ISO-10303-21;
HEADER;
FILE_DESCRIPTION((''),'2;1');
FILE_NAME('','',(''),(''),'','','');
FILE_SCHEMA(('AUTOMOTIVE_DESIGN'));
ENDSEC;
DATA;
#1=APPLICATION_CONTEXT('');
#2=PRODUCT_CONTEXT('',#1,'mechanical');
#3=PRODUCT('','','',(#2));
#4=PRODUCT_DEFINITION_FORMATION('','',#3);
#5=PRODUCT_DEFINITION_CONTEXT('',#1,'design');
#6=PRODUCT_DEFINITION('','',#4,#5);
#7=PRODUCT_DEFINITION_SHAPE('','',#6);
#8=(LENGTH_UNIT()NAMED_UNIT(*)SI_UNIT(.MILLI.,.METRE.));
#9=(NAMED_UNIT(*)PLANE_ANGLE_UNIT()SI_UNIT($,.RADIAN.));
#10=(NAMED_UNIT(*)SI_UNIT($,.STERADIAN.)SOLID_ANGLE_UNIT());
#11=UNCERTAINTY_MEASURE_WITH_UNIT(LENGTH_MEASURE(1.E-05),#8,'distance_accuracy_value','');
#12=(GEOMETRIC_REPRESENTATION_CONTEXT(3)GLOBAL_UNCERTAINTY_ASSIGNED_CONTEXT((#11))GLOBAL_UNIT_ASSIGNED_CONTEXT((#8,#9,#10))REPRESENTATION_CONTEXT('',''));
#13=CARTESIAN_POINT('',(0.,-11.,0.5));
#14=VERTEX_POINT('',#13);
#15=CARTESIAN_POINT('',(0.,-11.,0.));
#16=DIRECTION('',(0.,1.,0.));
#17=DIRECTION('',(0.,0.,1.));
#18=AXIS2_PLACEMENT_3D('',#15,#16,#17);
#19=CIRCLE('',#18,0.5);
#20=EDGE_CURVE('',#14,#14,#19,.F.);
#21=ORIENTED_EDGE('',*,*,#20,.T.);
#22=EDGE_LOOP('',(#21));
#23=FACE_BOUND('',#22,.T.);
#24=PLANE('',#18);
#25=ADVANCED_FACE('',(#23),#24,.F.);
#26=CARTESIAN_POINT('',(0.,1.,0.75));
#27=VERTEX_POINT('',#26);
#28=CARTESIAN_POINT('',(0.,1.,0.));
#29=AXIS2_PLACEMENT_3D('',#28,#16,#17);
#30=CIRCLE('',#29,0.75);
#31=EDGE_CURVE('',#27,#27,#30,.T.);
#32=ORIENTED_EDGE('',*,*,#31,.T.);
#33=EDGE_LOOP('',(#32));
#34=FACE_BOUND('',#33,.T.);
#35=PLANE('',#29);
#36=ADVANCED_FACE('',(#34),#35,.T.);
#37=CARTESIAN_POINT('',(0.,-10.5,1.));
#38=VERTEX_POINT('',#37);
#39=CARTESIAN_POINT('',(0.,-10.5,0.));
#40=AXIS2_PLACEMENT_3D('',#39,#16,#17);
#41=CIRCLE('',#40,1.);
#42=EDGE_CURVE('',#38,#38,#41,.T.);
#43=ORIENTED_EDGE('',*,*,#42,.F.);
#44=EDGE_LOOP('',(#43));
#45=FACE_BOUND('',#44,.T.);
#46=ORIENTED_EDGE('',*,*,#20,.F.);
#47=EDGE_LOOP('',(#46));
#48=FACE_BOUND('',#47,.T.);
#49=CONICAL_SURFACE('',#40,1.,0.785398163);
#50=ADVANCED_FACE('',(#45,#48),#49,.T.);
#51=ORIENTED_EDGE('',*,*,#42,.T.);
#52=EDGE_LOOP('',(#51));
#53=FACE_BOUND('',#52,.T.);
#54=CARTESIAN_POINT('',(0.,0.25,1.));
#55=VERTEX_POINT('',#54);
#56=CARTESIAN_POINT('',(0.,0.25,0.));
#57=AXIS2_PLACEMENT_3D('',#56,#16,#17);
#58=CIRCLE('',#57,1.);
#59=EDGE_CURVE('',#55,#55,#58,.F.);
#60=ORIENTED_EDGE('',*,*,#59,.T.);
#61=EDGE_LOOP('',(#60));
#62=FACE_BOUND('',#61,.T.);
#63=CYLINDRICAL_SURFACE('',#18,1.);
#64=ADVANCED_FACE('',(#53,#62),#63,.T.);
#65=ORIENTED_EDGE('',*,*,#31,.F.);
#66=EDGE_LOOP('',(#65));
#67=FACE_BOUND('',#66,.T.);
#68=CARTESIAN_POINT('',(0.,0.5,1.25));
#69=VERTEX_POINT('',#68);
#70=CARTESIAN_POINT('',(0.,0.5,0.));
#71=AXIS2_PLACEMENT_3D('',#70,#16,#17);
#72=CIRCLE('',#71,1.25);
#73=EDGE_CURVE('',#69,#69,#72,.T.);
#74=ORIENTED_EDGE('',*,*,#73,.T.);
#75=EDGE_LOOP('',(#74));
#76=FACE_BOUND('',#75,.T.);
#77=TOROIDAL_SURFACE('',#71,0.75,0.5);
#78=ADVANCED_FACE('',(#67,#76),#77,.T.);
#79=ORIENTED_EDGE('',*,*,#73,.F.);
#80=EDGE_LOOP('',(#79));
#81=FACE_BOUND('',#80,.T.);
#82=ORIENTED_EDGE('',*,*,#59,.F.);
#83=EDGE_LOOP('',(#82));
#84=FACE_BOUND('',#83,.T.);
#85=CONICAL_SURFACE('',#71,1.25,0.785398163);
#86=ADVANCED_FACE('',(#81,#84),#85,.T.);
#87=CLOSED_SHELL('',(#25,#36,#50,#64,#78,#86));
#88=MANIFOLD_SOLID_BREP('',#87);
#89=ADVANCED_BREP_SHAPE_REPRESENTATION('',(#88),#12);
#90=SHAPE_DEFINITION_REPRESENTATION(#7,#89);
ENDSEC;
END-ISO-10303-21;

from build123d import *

# Parameters (mm, degrees)
SKETCH1_R           = 1
BOSS_EXTRUDE1_DEPTH = 11
SKETCH2_R           = 1.25
BOSS_EXTRUDE2_DEPTH = 1
CHAMFER1_SIZE       = 0.5
CHAMFER2_SIZE       = 0.5
FILLET1_R           = 0.5


# Some blends are built 0.0001 mm under size
with BuildPart() as part:
    # Sketch1 → Boss-Extrude1 (new body)
    with BuildSketch(Plane(origin=(0, 0, 0), x_dir=(1, 0, 0), z_dir=(0, 1, 0))):
        with Locations(Location((0, 0, 0), (0, 0, 270))):
            Circle(SKETCH1_R)
    extrude(amount=-BOSS_EXTRUDE1_DEPTH)

    # Sketch2 → Boss-Extrude2 (add)
    with BuildSketch(Plane(origin=(0, 0, 0), x_dir=(1, 0, 0), z_dir=(0, 1, 0))):
        with Locations(Location((0, 0, 0), (0, 0, 270))):
            Circle(SKETCH2_R)
    extrude(amount=BOSS_EXTRUDE2_DEPTH)

    # Chamfer1
    # the kernel refuses this chamfer: 0.5 mm, written as the material it takes off along each edge
    with BuildSketch(Plane(origin=(0, 0, 0), x_dir=(0, 0, 1), z_dir=(-1, 0, 0))) as chamfer1_piece_1_section:
        Polygon((1.25, CHAMFER1_SIZE), (1.25 - CHAMFER1_SIZE, 0), (1.25, 0), align=None)
    chamfer1_piece_1 = revolve(axis=Axis((0, 0, 0), (0, 1, 0)), mode=Mode.PRIVATE)
    chamfer1_piece_1 = chamfer1_piece_1 - Plane(origin=(0, 0.375686262, 0), x_dir=(0, 0, 1), z_dir=(0, 1, 0)) * Cylinder(1, 5, mode=Mode.PRIVATE)
    add(chamfer1_piece_1, mode=Mode.SUBTRACT)

    # Chamfer2
    chamfer2_edges = [part.edges().sort_by_distance(p)[0] for p in [
        (0, -11, -1),
    ]]
    chamfer(chamfer2_edges, length=CHAMFER2_SIZE)

    # Fillet1
    fillet1_edges = [part.edges().sort_by_distance(p)[0] for p in [
        (0, 1, -1.25),
    ]]
    fillet(fillet1_edges, radius=FILLET1_R - 0.0001)  # a hair under: the kernel refuses the full size


solid = part.part
